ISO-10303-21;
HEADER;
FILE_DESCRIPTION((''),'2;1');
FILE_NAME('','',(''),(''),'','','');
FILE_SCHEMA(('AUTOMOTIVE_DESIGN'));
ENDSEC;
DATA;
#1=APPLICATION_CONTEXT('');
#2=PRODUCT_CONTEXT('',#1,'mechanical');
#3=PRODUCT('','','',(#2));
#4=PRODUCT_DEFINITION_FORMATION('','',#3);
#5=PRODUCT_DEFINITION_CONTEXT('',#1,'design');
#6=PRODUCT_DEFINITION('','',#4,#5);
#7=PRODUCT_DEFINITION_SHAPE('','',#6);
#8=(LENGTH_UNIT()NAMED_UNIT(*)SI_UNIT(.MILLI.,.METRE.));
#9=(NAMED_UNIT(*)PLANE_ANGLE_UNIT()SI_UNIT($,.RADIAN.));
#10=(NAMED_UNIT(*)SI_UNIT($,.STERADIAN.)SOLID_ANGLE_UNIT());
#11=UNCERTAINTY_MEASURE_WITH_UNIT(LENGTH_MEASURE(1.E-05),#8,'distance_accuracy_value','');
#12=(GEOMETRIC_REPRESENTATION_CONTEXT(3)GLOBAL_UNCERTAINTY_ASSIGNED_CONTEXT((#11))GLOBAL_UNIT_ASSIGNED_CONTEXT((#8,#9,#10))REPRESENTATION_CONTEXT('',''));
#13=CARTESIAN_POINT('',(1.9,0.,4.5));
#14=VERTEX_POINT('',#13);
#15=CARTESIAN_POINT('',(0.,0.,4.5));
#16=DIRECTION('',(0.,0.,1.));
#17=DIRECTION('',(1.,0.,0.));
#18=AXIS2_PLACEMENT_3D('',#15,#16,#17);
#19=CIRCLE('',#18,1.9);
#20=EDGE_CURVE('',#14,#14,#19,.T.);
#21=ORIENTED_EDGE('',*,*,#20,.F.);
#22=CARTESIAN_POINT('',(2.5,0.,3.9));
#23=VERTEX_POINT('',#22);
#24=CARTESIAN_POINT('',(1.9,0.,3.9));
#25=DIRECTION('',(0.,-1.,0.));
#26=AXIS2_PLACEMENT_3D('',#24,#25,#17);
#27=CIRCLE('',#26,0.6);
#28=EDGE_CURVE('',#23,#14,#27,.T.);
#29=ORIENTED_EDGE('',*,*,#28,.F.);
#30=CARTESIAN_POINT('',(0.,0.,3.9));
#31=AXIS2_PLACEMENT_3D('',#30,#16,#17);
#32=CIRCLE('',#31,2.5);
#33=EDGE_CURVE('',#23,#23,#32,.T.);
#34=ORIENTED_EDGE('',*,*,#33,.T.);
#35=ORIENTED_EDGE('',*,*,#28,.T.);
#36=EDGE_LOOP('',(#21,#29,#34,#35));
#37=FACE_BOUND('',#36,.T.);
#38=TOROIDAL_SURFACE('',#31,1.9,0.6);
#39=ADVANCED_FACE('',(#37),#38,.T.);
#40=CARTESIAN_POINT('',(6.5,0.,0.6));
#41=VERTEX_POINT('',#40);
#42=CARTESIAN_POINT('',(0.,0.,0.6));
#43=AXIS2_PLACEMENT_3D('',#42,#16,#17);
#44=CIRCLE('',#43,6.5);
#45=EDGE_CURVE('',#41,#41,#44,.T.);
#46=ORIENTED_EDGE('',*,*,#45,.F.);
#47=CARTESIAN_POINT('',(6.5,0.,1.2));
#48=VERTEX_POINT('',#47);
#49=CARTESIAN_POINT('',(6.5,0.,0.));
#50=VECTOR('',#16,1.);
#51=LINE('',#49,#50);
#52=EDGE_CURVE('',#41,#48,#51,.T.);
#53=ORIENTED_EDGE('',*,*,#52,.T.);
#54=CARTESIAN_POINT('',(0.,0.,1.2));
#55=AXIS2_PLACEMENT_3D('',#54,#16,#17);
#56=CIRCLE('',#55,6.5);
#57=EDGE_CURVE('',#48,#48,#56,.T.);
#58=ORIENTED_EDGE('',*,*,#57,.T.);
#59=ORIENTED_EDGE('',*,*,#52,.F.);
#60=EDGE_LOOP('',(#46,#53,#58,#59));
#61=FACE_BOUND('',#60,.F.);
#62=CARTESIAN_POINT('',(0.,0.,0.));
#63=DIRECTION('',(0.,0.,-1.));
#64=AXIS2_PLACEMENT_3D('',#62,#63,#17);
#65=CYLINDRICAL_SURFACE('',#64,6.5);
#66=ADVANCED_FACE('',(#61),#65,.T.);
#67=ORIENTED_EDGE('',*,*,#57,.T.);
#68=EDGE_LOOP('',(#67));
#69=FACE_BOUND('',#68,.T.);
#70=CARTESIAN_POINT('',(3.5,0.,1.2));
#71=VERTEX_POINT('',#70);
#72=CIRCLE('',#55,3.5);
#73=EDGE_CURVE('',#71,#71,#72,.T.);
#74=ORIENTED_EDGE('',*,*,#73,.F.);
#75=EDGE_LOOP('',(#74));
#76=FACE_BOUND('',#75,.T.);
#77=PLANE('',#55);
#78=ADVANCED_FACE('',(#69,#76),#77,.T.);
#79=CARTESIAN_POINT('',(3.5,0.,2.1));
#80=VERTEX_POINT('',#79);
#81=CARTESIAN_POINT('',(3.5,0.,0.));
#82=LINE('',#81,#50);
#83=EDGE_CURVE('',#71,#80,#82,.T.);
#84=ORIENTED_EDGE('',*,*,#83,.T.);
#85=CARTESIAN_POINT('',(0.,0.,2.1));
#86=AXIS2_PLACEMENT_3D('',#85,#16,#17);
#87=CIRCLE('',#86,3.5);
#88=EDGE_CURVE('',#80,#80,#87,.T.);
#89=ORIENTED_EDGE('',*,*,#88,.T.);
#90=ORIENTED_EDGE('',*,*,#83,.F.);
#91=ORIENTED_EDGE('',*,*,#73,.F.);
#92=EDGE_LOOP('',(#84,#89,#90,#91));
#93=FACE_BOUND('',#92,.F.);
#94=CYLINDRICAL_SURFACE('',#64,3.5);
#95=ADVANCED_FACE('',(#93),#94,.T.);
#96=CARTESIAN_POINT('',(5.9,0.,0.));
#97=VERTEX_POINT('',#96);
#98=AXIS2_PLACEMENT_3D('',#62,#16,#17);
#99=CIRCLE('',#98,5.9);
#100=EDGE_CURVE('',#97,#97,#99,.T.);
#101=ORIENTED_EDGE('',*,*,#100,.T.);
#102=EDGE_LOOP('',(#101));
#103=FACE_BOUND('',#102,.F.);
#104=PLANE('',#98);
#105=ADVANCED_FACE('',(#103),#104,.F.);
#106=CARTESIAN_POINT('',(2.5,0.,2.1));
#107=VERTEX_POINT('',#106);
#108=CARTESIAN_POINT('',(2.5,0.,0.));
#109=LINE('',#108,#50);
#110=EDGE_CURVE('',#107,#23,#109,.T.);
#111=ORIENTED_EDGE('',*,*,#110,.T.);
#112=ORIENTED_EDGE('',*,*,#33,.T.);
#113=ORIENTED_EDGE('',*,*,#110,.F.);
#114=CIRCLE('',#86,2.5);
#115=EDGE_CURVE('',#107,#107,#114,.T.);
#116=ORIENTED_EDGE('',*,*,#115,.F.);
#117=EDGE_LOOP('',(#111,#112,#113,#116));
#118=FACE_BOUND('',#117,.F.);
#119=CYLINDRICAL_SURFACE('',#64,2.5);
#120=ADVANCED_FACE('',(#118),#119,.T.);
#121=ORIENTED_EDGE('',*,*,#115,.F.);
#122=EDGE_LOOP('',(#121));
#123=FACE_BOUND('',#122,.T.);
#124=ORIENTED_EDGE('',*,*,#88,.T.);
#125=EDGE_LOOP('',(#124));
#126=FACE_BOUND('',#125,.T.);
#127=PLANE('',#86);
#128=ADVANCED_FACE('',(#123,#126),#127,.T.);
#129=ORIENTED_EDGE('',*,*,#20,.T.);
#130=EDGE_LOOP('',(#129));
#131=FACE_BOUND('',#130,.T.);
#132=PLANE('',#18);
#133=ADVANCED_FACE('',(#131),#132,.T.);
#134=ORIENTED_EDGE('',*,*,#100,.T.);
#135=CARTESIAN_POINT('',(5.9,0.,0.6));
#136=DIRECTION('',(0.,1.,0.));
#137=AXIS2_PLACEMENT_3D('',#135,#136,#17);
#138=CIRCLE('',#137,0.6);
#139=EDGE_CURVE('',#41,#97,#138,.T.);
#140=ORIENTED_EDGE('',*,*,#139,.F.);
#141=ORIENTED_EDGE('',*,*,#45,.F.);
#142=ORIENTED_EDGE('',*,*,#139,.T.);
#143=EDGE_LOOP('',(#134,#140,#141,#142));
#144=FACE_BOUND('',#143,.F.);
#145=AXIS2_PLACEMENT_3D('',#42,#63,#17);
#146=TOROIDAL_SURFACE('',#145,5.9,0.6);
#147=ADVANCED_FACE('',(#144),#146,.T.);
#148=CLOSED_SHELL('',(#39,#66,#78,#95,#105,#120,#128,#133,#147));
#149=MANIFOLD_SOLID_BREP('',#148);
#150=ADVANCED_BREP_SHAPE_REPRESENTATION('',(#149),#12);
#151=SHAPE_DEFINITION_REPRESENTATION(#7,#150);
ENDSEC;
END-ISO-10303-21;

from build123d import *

# Parameters (mm, degrees)
F0_R     = 6.5
F0_R_2   = 3.5
F4_DEPTH = 1.2
F0_R_3   = 2.5
F5_DEPTH = 2.1
F6_DEPTH = 4.5
F7_R     = 0.6


# Not quite as in the source:
# - a feature names something its author has since deleted; it is built from what else it names


with BuildPart() as f4:
    # F0 (on Top) → F4 (new body)
    with BuildSketch(Plane.XY):
        Circle(F0_R)
        Circle(F0_R_2, mode=Mode.SUBTRACT)
    extrude(amount=F4_DEPTH)

    # F0 (on Top) → F5 (join)
    with BuildSketch(Plane.XY):
        Circle(F0_R_2)
        Circle(F0_R_3, mode=Mode.SUBTRACT)
    extrude(amount=F5_DEPTH)

    # F0 (on Top) → F6 (join)
    with BuildSketch(Plane.XY):
        Circle(F0_R_3)
    extrude(amount=F6_DEPTH)

    # F7
    f7_edges = [f4.edges().sort_by_distance(p)[0] for p in [
        (-2.5, 0, 4.5),
        (-6.5, 0, 0),
    ]]
    fillet(f7_edges, radius=F7_R)


solid = f4.part
